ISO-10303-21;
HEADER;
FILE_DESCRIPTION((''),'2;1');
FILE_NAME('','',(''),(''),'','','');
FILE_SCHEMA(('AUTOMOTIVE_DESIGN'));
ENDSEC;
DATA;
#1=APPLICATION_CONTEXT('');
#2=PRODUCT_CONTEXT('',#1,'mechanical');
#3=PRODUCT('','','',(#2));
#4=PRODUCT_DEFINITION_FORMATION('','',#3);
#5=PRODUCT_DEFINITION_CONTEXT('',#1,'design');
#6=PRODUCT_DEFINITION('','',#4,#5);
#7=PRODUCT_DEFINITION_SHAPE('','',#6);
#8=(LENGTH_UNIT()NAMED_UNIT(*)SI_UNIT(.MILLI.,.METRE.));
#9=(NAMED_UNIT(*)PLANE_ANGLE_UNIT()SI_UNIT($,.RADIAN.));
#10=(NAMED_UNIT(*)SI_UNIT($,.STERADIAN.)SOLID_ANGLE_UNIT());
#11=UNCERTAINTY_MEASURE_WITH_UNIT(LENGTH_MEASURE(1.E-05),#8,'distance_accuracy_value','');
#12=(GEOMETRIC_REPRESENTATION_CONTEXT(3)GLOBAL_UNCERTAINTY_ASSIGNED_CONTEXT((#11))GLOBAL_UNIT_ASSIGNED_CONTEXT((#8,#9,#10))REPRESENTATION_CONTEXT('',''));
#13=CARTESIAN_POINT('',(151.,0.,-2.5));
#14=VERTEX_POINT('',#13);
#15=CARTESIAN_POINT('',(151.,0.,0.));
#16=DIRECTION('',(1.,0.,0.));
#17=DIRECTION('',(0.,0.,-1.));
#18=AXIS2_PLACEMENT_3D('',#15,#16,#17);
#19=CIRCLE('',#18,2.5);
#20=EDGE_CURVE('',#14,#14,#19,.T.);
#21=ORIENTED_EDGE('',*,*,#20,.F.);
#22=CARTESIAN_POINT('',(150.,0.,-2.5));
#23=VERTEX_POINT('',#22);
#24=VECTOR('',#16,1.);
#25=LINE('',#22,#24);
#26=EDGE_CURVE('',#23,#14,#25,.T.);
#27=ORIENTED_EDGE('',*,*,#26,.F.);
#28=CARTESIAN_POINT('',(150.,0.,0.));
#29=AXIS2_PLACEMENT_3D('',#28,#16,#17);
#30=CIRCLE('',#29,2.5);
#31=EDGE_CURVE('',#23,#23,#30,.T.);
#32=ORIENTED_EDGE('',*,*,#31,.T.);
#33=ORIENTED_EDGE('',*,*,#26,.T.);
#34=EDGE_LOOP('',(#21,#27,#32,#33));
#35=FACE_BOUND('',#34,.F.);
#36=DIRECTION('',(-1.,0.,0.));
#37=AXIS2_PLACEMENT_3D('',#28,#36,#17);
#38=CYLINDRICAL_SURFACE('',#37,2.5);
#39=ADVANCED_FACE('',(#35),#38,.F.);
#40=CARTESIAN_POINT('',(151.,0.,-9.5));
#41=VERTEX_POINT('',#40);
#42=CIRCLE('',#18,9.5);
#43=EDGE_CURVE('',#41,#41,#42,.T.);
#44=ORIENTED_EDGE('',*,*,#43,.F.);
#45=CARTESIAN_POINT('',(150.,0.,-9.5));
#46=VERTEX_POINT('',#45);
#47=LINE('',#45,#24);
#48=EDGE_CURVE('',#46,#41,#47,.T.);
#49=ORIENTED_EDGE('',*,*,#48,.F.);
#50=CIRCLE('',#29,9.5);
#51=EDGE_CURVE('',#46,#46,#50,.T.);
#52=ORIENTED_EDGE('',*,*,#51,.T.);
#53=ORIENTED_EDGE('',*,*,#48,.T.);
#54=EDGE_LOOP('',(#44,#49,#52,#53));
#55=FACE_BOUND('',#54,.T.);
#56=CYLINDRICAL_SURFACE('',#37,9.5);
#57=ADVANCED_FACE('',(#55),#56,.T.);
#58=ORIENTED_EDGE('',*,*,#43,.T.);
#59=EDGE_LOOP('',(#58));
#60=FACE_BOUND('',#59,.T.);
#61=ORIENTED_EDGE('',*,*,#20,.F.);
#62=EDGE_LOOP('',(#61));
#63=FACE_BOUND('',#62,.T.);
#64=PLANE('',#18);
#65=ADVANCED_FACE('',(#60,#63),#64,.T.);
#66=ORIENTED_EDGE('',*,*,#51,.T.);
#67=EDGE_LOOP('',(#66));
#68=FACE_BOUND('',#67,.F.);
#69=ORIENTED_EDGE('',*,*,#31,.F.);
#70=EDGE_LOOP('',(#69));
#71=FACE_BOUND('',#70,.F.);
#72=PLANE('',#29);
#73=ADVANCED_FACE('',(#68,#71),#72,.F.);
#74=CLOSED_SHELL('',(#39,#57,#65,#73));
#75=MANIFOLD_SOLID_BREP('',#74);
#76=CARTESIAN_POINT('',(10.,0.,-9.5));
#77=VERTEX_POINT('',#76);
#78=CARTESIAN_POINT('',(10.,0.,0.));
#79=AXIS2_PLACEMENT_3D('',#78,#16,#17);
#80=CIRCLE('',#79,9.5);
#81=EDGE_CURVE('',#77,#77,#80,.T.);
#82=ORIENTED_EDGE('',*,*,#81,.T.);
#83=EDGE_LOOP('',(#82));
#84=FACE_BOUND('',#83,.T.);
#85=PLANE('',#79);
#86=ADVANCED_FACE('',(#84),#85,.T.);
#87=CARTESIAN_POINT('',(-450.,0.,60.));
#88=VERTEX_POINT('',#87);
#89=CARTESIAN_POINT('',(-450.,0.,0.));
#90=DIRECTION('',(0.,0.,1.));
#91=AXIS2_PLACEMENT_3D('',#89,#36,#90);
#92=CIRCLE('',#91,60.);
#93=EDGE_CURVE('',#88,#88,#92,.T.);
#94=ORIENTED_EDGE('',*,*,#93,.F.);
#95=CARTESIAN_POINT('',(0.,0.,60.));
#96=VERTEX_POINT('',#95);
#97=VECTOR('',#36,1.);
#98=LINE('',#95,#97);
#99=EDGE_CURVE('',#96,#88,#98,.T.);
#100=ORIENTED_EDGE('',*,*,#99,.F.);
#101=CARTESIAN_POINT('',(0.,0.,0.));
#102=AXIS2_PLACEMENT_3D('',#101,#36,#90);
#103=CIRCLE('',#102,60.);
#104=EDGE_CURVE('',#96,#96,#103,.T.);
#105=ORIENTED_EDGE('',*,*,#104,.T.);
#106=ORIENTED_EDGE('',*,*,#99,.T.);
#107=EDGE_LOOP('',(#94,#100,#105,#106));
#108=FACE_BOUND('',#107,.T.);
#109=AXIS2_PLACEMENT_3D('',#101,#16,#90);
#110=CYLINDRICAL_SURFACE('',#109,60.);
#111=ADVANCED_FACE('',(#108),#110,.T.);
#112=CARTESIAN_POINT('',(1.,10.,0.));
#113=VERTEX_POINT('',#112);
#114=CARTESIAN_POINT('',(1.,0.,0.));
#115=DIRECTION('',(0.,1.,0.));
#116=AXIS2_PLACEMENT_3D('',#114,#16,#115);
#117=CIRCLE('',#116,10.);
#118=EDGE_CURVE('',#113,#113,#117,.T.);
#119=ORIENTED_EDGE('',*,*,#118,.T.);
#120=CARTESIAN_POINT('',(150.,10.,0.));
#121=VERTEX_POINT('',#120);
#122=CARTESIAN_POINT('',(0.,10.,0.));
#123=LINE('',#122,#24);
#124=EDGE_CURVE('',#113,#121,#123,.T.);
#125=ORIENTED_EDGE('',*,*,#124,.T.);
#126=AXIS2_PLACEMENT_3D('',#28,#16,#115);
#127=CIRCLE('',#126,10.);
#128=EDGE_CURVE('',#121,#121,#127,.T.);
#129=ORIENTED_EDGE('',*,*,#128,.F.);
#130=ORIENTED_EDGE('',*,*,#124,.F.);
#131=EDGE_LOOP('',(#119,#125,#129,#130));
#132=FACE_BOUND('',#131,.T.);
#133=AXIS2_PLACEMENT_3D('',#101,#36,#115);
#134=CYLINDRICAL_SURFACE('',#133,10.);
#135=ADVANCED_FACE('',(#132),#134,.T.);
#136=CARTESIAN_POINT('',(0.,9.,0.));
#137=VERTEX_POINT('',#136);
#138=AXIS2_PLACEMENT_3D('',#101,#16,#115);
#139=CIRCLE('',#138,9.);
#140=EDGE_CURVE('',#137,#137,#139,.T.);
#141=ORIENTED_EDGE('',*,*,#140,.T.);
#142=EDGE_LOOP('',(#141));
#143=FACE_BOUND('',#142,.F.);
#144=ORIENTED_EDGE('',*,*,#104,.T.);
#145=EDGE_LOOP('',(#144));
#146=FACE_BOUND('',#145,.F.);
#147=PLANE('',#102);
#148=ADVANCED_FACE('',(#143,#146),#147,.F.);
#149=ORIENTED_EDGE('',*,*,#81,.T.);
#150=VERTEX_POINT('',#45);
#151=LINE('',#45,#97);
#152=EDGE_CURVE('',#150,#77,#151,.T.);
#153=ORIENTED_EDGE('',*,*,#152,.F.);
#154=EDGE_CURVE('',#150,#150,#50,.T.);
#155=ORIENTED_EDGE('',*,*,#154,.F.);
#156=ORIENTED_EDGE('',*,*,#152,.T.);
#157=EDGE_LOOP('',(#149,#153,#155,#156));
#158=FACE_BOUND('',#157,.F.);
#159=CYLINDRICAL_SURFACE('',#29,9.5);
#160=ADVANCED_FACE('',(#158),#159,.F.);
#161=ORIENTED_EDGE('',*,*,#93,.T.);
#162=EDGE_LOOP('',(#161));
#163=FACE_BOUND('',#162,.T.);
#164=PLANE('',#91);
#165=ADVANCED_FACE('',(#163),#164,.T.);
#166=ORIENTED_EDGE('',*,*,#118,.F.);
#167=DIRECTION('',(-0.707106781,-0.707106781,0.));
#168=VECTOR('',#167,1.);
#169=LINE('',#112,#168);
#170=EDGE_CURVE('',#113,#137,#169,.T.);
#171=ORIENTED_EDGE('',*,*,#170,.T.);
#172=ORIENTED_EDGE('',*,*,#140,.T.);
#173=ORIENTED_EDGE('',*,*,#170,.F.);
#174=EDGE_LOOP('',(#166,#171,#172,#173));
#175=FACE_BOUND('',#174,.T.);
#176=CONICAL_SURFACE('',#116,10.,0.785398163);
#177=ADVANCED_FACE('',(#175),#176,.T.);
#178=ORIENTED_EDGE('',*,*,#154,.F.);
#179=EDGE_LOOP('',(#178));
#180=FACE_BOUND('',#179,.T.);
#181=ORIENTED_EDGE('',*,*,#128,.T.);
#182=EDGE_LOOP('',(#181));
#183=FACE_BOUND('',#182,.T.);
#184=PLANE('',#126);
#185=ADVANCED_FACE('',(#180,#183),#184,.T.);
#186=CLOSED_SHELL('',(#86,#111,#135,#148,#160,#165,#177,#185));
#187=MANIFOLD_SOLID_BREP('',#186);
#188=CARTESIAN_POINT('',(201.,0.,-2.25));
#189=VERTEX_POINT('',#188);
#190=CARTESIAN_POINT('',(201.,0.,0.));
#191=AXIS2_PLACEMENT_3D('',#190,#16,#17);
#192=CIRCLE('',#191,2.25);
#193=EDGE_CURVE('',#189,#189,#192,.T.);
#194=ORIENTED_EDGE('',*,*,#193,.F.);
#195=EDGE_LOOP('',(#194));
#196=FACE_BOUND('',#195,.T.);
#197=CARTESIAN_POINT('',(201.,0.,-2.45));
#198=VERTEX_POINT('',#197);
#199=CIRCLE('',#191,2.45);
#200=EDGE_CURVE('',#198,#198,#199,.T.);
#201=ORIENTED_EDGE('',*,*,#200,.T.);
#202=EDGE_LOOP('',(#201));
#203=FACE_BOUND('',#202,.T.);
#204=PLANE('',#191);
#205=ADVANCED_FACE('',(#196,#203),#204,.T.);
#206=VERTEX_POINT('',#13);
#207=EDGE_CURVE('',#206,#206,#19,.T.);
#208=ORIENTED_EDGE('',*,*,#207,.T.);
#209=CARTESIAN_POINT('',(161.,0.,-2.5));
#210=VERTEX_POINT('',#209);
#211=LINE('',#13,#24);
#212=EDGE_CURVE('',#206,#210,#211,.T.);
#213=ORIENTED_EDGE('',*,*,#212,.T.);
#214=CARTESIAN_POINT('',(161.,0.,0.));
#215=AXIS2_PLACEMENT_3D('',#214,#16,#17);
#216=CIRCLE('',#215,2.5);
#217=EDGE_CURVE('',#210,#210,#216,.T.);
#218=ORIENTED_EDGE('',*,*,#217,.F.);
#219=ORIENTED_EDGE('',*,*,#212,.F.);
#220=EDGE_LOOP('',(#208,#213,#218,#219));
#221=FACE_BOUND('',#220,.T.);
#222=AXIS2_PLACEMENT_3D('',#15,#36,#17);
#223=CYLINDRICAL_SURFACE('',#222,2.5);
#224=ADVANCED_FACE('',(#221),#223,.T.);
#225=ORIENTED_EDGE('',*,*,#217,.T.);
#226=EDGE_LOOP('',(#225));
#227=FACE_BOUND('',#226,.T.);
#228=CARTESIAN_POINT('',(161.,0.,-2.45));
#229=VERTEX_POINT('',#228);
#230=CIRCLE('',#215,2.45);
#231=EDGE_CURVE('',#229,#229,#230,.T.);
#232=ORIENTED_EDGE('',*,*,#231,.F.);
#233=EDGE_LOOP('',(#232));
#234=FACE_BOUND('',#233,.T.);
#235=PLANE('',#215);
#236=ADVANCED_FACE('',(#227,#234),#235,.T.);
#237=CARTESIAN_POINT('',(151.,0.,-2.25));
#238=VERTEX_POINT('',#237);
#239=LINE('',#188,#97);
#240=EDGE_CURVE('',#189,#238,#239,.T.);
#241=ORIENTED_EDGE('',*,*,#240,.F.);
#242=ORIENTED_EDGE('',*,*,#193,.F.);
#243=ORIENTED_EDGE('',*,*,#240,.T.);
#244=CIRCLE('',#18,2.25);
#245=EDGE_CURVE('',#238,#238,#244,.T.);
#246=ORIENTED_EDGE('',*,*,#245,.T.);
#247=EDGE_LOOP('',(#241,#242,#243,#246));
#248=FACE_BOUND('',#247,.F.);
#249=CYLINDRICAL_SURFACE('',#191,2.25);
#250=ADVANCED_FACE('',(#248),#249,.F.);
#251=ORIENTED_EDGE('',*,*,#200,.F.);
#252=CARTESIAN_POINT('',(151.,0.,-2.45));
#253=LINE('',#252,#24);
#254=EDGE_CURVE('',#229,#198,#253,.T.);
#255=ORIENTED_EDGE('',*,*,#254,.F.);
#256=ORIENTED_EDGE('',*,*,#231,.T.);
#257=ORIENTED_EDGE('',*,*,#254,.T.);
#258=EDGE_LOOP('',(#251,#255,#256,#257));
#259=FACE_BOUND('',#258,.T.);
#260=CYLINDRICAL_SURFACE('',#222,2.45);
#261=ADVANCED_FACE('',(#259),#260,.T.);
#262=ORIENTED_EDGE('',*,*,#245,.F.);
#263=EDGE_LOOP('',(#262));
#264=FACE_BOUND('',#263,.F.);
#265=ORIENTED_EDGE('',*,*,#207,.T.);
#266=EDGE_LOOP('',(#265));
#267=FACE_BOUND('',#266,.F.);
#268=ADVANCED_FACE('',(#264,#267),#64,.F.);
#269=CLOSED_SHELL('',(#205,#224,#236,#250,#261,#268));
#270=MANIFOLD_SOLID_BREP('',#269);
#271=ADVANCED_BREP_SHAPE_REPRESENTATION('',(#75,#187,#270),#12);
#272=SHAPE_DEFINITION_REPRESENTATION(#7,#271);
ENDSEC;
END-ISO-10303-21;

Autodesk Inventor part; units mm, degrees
ref_plane "YZ Plane" through (0, 0, 0) normal (1, 0, 0) x (0, 1, 0)
ref_plane "XZ Plane" through (0, 0, 0) normal (0, 1, 0) x (-1, 0, 0)
ref_plane "XY Plane" through (0, 0, 0) normal (0, 0, 1) x (1, 0, 0)
sketch "Sketch1" plane through (0, 0, 0) normal (1, 0, 0) x (0, 1, 0)
  circle A0 centre (0, 0) radius 10
  dimension "d0" = 20
extrude "Extrusion1" add sketch "Sketch1" along normal blind 150
sketch "Sketch2" plane through (150, 0, 0) normal (1, 0, 0) x (0, 0, -1)
  circle A0 centre (0, 0) radius 9.5
  dimension "d4" = 19
extrude "Extrusion2" cut sketch "Sketch2" against normal blind 140
sketch "Sketch3" plane through (150, 0, 0) normal (1, 0, 0) x (0, 0, -1)
  circle A0 centre (0, 0) radius 9.5
  circle A1 centre (0, 0) radius 2.5
  dimension "d7" = 5
extrude "Extrusion3" add sketch "Sketch3" along normal blind 1
sketch "Sketch4" plane through (151, 0, 0) normal (1, 0, 0) x (0, 0, -1)
  circle A0 centre (0, 0) radius 2.5 projected
  circle A1 centre (0, 0) radius 2.5
  dimension "d10" = 5
extrude "Extrusion4" add sketch "Sketch4" along normal blind 10
sketch "Sketch5" plane through (151, 0, 0) normal (1, 0, 0) x (0, 0, -1)
  circle A0 centre (0, 0) radius 2.45
  dimension "d13" = 4.9
sketch "Sketch6" plane through (161, 0, 0) normal (1, 0, 0) x (0, 0, -1)
  circle A0 centre (0, 0) radius 2.45
  dimension "d14" = 4.9
extrude "Extrusion5" cut sketch "Sketch6" against normal blind 120
extrude "Extrusion6" add sketch "Sketch5" along normal blind 50
sketch "Sketch7" plane through (201, 0, 0) normal (1, 0, 0) x (0, 0, -1)
  circle A0 centre (0, 0) radius 2.5 projected
  circle A1 centre (0, 0) radius 2.4
  dimension "d19" = 4.8
sketch "Sketch8" plane through (201, 0, 0) normal (1, 0, 0) x (0, 0, -1)
  circle A0 centre (0, 0) radius 2.5 projected
  circle A1 centre (0, 0) radius 2.25
  dimension "d20" = 4.5
extrude "Extrusion7" cut sketch "Sketch8" against normal blind 140 contours A1
chamfer "Chamfer1" distance 1 angle 45 1 edges at (0, -10, 0) measured on face at (0, -1.182, 3.1167)
sketch "Sketch10" plane through (0, 0, 0) normal (-1, 0, 0) x (0, 0, 1)
  circle A0 centre (0, 0) radius 2.5 projected
  circle A1 centre (0, 0) radius 9.5 projected
  circle A2 centre (0, 0) radius 60
  dimension "d28" = 120
extrude "Extrusion8" add sketch "Sketch10" along normal blind 450 contours A0 | A1 | A2
properties part number "supply agent"
